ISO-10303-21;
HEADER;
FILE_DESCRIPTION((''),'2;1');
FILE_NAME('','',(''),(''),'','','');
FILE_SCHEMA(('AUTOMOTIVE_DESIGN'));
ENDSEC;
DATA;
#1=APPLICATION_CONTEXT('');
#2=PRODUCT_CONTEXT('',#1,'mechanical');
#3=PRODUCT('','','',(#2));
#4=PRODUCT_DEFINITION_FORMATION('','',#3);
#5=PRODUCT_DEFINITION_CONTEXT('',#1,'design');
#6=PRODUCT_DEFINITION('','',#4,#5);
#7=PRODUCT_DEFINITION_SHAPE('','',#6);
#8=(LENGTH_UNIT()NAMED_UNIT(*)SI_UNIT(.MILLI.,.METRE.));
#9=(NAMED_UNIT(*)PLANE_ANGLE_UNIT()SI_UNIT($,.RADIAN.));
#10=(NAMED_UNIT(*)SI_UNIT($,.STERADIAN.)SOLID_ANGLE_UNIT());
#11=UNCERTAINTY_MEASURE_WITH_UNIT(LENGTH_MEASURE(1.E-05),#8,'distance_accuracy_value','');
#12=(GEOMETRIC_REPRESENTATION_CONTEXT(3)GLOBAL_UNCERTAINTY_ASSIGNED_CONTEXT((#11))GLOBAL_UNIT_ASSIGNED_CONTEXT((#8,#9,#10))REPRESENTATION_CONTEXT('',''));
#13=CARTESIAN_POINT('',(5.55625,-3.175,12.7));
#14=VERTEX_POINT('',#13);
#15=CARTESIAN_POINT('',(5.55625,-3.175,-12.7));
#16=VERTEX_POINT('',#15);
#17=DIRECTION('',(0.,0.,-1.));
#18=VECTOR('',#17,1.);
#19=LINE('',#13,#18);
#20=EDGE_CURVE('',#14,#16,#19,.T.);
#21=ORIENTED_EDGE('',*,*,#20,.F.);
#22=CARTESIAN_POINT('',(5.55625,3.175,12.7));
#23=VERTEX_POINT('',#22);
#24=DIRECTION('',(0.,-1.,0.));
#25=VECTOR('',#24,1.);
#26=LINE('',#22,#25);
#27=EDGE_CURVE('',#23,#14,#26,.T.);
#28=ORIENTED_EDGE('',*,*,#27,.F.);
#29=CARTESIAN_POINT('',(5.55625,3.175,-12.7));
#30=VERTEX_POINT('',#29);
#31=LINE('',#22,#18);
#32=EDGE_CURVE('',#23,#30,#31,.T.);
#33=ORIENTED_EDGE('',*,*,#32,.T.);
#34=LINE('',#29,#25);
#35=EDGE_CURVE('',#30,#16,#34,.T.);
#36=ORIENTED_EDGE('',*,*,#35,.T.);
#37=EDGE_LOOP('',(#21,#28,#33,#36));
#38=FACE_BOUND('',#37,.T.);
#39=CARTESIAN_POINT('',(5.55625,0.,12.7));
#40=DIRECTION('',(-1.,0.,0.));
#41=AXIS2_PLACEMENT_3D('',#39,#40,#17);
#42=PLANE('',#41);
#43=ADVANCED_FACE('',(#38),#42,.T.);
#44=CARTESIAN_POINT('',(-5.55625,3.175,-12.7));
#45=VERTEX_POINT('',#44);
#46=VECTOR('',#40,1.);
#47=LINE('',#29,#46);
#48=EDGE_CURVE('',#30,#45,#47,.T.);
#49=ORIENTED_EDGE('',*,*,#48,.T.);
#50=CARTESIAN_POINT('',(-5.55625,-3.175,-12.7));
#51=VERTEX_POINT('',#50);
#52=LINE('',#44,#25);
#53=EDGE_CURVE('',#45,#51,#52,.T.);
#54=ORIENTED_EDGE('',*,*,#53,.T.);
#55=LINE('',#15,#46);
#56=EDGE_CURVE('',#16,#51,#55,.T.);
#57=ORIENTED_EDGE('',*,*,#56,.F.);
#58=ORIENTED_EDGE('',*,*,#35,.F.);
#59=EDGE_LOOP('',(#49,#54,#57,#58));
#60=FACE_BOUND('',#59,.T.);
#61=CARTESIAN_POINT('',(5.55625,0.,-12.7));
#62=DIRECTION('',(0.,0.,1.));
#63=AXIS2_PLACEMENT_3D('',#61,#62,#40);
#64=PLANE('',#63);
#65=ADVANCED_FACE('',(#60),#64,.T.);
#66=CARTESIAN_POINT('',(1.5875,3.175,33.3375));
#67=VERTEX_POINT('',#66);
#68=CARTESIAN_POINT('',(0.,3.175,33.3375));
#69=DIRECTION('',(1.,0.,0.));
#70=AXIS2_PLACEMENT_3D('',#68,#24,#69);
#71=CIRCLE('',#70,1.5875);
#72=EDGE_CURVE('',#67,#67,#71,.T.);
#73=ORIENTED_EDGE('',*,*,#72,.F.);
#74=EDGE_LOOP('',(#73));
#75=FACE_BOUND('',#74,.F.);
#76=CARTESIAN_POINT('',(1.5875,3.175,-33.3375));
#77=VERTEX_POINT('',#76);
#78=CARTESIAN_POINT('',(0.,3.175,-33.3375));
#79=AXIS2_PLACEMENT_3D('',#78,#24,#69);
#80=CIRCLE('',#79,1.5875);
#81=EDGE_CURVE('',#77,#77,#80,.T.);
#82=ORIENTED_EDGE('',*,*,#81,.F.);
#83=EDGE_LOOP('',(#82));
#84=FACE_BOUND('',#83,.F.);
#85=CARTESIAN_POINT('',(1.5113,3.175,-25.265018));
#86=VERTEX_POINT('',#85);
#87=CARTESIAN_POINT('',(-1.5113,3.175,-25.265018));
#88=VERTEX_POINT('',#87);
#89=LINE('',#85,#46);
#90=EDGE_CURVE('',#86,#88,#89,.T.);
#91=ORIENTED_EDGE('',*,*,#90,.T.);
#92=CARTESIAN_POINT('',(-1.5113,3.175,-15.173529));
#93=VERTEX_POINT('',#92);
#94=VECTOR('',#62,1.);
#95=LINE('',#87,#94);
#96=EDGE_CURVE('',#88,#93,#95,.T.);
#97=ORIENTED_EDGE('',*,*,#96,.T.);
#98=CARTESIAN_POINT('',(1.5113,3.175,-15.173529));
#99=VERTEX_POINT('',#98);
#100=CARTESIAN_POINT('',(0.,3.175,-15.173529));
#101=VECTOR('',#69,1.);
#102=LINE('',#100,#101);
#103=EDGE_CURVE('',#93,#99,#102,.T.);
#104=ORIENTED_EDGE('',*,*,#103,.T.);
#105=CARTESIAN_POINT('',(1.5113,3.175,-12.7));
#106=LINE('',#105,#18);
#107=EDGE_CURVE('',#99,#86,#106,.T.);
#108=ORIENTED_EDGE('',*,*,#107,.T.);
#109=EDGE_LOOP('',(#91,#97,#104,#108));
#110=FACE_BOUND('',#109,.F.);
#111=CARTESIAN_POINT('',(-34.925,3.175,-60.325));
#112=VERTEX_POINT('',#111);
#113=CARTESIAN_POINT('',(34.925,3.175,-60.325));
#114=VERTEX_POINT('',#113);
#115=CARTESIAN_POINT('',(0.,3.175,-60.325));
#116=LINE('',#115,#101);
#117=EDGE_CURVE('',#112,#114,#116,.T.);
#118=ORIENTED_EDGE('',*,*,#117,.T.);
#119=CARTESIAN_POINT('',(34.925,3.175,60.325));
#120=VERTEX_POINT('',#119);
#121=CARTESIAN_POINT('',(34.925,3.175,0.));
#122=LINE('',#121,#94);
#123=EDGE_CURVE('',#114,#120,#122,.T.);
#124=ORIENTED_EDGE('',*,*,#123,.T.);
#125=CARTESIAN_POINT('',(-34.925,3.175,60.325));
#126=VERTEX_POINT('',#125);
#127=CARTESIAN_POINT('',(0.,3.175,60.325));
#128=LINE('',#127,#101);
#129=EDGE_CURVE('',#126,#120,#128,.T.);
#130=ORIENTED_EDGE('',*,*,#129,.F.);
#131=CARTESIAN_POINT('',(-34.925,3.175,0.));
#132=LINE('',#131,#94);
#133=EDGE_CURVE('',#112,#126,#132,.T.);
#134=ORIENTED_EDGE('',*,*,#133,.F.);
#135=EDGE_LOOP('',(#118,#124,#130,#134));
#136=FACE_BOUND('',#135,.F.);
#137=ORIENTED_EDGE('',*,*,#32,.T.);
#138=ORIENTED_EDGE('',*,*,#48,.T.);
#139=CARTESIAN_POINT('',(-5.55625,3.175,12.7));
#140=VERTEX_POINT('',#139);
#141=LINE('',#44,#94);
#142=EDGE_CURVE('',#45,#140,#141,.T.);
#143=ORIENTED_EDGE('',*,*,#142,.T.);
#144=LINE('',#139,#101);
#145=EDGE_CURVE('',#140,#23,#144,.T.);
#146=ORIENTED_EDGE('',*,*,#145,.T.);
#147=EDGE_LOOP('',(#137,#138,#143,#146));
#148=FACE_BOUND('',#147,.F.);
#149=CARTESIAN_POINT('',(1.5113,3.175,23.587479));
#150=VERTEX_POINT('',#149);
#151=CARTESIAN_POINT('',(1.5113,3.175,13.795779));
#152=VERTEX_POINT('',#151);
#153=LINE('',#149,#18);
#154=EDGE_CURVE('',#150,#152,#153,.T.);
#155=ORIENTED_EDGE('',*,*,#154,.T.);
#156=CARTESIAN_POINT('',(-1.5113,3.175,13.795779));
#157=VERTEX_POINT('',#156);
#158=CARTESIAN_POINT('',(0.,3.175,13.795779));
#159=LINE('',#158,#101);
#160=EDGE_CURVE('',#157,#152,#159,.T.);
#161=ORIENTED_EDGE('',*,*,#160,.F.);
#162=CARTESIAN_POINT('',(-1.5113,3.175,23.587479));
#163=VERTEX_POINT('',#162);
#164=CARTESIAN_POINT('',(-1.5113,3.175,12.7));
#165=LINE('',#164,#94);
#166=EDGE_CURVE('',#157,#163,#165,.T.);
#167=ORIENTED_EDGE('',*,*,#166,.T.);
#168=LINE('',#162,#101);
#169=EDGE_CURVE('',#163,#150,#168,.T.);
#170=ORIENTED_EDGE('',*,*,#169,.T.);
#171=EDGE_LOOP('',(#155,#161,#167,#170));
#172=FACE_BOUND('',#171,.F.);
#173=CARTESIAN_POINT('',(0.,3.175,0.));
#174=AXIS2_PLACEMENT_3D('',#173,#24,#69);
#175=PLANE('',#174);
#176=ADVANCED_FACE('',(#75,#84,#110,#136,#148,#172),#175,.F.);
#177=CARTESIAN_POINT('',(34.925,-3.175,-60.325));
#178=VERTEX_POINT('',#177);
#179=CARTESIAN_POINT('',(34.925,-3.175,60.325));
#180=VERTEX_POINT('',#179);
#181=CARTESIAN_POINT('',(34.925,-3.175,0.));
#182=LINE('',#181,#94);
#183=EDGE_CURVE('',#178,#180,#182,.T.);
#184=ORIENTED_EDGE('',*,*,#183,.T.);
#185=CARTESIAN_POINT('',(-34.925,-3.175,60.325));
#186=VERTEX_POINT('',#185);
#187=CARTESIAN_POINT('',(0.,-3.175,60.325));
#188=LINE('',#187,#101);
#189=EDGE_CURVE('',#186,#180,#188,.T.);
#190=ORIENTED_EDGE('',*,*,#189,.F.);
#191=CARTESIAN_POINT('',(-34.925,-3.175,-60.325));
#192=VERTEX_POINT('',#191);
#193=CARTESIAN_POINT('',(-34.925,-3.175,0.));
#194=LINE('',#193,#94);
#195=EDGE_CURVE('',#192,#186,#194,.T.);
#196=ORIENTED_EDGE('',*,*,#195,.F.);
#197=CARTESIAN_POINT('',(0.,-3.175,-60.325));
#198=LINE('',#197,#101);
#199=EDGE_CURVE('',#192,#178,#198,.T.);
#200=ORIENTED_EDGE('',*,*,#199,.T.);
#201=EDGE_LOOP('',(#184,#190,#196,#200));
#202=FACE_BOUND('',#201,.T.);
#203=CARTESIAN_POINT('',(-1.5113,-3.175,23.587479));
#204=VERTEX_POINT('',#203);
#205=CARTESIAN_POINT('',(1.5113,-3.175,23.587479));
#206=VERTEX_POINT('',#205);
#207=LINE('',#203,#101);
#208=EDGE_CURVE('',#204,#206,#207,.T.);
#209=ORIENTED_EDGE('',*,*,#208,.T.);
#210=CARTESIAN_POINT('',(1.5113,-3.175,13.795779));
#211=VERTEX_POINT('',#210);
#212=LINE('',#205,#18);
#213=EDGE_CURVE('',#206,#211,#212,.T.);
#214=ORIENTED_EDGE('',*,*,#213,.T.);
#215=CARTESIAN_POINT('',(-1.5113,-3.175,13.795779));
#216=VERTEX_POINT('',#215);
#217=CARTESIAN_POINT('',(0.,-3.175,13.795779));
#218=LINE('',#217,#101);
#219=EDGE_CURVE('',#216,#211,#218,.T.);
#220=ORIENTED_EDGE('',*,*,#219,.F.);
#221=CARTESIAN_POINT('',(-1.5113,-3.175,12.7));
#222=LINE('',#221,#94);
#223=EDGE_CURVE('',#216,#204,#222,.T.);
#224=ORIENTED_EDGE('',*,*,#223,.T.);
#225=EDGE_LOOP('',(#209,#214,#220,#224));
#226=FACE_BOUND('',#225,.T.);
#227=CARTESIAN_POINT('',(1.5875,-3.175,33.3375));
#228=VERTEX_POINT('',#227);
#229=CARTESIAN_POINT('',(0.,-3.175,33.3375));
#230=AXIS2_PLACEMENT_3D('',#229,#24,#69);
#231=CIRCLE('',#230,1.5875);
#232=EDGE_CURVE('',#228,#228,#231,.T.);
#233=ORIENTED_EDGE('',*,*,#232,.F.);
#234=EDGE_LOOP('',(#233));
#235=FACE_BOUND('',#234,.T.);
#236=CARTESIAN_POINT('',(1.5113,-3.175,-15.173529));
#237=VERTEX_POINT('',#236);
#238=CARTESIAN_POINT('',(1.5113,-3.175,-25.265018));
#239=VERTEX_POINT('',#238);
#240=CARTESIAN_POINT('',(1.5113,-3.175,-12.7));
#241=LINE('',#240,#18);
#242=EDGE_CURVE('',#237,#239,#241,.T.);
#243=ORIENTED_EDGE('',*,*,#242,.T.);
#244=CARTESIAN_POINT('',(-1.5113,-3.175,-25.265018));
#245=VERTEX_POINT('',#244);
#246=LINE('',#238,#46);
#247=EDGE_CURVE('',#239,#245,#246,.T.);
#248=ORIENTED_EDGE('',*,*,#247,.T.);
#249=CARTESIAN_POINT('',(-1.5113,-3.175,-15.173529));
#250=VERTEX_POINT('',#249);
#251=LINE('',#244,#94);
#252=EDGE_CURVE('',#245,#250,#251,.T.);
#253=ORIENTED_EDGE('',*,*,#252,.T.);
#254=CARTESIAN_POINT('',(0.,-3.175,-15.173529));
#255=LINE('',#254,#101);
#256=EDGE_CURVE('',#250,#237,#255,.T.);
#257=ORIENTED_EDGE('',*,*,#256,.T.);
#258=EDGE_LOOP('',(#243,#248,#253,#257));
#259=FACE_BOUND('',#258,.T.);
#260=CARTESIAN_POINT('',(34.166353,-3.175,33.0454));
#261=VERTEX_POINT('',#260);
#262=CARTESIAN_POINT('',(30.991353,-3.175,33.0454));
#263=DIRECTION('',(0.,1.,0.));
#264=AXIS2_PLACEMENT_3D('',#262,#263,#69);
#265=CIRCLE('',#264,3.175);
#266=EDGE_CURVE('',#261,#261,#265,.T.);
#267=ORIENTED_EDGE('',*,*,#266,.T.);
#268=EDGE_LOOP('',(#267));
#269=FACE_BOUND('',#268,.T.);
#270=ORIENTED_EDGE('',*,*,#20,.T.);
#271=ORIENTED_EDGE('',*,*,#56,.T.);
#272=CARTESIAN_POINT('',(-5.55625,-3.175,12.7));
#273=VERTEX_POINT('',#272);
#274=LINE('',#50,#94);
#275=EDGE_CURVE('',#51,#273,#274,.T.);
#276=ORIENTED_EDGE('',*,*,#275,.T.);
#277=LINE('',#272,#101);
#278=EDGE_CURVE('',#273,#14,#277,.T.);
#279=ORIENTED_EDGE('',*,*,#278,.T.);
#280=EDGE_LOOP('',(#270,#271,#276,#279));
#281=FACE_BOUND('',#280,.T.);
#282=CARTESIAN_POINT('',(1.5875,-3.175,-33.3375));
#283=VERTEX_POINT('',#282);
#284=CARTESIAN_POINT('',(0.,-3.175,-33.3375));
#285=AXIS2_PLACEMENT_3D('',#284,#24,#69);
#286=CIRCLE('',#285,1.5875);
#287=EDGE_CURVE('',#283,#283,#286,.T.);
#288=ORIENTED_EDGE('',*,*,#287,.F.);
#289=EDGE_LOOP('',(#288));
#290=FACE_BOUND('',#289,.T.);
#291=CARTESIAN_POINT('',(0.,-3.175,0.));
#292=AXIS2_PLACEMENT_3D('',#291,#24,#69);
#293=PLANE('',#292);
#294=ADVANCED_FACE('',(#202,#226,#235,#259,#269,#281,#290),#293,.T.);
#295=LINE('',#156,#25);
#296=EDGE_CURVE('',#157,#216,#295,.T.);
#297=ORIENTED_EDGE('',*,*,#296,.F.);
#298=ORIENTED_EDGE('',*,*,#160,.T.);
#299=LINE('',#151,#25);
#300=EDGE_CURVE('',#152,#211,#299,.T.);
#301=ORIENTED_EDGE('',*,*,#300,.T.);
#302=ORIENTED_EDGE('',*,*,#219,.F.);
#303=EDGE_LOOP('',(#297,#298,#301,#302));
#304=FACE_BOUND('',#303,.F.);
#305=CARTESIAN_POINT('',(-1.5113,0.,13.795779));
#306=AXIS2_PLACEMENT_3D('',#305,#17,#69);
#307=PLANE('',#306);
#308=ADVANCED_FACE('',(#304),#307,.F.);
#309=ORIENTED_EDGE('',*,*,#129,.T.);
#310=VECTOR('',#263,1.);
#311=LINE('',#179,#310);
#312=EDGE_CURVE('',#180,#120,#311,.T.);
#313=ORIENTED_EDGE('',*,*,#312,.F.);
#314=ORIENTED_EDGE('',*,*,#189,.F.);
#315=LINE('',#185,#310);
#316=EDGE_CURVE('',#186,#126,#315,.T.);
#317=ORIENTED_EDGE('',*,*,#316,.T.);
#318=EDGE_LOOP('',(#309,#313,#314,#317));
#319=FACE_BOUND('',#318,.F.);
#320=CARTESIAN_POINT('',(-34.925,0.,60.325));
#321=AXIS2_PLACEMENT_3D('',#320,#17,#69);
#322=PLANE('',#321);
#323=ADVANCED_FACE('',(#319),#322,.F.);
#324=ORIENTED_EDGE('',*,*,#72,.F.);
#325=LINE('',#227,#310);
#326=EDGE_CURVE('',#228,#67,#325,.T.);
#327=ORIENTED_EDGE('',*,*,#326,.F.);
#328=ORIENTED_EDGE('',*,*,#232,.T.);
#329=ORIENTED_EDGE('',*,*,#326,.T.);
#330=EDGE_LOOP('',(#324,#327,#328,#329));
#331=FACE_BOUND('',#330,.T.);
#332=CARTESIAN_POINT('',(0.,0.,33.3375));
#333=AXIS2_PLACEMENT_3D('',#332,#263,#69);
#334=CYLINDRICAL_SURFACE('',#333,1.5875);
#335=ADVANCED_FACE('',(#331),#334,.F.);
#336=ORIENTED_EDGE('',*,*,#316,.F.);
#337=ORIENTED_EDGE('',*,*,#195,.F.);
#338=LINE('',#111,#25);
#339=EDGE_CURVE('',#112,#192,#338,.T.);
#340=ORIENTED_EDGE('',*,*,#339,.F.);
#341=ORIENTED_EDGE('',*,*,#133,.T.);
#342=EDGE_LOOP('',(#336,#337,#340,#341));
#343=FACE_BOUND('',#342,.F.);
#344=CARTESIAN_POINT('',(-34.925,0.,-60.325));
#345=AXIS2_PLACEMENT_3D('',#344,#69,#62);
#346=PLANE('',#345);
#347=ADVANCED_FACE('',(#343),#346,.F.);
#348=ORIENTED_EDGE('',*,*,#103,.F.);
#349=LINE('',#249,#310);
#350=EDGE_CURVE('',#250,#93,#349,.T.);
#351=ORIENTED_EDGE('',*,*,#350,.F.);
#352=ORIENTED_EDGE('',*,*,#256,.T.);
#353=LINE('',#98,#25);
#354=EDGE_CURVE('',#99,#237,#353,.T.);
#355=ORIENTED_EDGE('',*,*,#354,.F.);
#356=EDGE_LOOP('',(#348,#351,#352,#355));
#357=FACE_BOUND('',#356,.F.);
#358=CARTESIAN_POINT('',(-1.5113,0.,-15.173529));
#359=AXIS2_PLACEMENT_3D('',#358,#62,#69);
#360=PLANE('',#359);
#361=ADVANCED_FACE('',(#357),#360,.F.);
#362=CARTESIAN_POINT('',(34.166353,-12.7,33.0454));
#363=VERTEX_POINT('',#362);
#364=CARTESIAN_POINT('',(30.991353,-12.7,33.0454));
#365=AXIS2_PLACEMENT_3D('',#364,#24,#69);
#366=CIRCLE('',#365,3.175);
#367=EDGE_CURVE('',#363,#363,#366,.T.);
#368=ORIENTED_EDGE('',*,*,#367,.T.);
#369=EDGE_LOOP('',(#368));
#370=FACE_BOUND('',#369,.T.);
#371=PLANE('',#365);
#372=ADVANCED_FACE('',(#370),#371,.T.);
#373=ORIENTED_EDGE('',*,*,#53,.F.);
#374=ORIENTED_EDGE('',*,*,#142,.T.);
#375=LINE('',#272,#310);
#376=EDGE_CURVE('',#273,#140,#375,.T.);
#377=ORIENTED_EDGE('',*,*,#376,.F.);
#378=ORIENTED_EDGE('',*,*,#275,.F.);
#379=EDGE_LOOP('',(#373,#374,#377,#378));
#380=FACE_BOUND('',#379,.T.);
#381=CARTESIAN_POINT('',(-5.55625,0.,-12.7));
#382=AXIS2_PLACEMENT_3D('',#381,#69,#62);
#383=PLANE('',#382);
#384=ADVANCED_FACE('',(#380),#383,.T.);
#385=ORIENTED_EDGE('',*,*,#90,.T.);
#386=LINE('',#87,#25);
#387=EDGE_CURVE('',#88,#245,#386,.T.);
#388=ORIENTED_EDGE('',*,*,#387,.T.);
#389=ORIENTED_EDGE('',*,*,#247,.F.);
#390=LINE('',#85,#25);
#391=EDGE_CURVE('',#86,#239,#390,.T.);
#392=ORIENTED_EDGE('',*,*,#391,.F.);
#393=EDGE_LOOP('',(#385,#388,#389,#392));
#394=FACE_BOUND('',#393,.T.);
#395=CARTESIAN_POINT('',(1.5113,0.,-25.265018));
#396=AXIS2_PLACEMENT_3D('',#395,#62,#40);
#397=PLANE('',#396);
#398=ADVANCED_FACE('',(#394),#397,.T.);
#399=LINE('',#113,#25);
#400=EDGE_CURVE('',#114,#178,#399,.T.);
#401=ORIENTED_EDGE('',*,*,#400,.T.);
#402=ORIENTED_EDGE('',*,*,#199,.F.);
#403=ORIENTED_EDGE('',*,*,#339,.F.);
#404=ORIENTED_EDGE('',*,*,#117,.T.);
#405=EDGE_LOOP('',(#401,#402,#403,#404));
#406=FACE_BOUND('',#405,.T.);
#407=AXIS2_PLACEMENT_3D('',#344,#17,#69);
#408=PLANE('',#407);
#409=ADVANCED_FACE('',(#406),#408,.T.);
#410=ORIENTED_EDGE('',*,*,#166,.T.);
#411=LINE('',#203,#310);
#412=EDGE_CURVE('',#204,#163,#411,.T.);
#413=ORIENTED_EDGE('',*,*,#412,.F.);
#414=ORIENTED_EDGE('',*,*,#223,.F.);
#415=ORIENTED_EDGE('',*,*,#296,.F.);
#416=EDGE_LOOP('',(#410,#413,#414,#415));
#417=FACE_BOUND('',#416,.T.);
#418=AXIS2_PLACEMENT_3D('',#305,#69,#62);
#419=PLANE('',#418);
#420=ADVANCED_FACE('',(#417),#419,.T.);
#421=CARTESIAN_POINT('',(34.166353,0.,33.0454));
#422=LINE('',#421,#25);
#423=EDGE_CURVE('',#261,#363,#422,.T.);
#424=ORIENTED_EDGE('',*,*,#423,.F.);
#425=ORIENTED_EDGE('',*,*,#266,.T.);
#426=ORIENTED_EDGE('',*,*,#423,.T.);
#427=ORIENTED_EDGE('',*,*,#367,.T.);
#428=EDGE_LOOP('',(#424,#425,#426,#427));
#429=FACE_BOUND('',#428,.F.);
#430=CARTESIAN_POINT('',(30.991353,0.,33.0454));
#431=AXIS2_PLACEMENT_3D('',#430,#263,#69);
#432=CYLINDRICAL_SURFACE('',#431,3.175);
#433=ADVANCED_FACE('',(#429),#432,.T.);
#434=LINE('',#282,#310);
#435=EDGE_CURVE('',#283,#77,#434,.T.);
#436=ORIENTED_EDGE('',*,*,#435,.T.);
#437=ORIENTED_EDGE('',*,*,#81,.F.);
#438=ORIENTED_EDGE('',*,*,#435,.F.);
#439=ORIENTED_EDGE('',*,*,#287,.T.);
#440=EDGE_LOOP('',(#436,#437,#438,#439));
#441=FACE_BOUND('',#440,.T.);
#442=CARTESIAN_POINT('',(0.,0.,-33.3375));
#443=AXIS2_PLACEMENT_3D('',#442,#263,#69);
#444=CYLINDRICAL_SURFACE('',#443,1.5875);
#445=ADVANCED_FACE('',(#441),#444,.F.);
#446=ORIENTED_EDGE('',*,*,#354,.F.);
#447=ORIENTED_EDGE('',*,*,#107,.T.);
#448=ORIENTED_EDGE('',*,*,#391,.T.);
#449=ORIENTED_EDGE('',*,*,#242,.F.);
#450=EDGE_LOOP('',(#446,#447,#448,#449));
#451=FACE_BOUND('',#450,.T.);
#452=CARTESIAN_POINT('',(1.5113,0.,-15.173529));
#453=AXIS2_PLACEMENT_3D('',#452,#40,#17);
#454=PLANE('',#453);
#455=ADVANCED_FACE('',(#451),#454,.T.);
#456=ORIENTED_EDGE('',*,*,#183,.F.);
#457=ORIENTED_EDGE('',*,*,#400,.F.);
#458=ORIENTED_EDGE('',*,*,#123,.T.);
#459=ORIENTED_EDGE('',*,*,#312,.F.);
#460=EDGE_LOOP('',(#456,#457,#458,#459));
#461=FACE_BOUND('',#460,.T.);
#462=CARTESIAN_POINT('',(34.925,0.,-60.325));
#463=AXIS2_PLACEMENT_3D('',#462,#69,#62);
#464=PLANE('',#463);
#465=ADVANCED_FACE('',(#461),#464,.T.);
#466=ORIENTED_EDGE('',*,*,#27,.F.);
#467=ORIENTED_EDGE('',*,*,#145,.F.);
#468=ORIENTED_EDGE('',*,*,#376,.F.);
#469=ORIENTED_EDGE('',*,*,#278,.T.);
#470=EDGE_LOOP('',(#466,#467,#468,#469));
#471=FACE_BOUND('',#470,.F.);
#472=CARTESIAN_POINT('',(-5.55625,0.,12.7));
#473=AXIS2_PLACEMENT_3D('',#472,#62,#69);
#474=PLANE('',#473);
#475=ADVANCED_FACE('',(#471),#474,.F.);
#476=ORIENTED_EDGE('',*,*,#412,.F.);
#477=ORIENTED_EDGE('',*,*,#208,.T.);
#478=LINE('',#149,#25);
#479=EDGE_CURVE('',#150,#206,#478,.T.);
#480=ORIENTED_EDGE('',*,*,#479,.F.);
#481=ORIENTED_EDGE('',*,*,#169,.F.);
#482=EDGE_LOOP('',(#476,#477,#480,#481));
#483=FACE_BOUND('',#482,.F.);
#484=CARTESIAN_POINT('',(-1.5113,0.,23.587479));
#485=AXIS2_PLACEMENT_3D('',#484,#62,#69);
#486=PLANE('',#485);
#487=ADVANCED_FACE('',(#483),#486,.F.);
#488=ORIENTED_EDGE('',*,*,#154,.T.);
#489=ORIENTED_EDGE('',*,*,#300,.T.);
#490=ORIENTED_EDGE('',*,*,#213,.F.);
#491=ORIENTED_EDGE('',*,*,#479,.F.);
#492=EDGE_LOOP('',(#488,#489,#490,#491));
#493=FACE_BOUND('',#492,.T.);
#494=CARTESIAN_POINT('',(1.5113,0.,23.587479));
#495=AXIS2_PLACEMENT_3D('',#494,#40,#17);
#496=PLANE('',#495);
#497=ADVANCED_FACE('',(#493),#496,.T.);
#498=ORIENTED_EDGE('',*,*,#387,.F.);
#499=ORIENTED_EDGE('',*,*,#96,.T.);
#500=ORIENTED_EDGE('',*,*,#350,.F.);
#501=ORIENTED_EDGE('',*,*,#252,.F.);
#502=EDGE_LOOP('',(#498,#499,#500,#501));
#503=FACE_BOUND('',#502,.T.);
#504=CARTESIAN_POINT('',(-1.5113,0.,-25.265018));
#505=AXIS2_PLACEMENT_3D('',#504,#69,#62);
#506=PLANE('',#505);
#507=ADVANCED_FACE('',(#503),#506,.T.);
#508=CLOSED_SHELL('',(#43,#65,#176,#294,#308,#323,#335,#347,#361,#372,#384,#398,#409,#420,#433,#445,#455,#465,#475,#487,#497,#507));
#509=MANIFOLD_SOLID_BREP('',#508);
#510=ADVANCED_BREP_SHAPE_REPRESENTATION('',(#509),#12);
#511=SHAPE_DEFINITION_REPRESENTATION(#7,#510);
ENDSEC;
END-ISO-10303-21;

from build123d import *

# Parameters (mm, degrees)
F0_R     = 3.175
F1_DEPTH = 12.7
F0_W     = 69.85
F0_H     = 120.65
F0_R_2   = 1.5875
F0_W_2   = 3.0226
F0_H_2   = 1.0957790866
F0_H_3   = 2.4735292748
F2_DEPTH = 3.175


# Not quite as in the source:
# - a feature names something its author has since deleted; it is built from what else it names


with BuildPart() as f1:
    # F0 (on Front) → F1 (new body)
    with BuildSketch(Plane.XZ):
        with Locations((30.9913528, 33.0454)):
            Circle(F0_R)
    extrude(amount=F1_DEPTH)

    # F0 (on Front) → F2 (join, symmetric)
    with BuildSketch(Plane.XZ):
        Rectangle(F0_W, F0_H)
        with Locations((0, -33.3375)):
            Circle(F0_R_2, mode=Mode.SUBTRACT)
        Polygon((1.5113, 12.7), (5.55625, 12.7), (5.55625, -12.7), (1.5113, -12.7), (1.5113, -15.1735292748), (1.5113, -25.2650182862), (-1.5113, -25.2650182862), (-1.5113, -15.1735292748), (-1.5113, -12.7), (-5.55625, -12.7), (-5.55625, 12.7), (-1.5113, 12.7), (-1.5113, 13.7957790866), (-1.5113, 23.5874790866), (1.5113, 23.5874790866), (1.5113, 13.7957790866), align=None, mode=Mode.SUBTRACT)
        with Locations((0, 33.3375)):
            Circle(F0_R_2, mode=Mode.SUBTRACT)
        with Locations((30.9913528, 33.0454)):
            Circle(F0_R, mode=Mode.SUBTRACT)
        with Locations((0, 13.2478895433)):
            Rectangle(F0_W_2, F0_H_2)
        with Locations((30.9913528, 33.0454)):
            Circle(F0_R)
        with Locations((0, -13.9367646374)):
            Rectangle(F0_W_2, F0_H_3)
    extrude(amount=F2_DEPTH, both=True)


solid = f1.part
